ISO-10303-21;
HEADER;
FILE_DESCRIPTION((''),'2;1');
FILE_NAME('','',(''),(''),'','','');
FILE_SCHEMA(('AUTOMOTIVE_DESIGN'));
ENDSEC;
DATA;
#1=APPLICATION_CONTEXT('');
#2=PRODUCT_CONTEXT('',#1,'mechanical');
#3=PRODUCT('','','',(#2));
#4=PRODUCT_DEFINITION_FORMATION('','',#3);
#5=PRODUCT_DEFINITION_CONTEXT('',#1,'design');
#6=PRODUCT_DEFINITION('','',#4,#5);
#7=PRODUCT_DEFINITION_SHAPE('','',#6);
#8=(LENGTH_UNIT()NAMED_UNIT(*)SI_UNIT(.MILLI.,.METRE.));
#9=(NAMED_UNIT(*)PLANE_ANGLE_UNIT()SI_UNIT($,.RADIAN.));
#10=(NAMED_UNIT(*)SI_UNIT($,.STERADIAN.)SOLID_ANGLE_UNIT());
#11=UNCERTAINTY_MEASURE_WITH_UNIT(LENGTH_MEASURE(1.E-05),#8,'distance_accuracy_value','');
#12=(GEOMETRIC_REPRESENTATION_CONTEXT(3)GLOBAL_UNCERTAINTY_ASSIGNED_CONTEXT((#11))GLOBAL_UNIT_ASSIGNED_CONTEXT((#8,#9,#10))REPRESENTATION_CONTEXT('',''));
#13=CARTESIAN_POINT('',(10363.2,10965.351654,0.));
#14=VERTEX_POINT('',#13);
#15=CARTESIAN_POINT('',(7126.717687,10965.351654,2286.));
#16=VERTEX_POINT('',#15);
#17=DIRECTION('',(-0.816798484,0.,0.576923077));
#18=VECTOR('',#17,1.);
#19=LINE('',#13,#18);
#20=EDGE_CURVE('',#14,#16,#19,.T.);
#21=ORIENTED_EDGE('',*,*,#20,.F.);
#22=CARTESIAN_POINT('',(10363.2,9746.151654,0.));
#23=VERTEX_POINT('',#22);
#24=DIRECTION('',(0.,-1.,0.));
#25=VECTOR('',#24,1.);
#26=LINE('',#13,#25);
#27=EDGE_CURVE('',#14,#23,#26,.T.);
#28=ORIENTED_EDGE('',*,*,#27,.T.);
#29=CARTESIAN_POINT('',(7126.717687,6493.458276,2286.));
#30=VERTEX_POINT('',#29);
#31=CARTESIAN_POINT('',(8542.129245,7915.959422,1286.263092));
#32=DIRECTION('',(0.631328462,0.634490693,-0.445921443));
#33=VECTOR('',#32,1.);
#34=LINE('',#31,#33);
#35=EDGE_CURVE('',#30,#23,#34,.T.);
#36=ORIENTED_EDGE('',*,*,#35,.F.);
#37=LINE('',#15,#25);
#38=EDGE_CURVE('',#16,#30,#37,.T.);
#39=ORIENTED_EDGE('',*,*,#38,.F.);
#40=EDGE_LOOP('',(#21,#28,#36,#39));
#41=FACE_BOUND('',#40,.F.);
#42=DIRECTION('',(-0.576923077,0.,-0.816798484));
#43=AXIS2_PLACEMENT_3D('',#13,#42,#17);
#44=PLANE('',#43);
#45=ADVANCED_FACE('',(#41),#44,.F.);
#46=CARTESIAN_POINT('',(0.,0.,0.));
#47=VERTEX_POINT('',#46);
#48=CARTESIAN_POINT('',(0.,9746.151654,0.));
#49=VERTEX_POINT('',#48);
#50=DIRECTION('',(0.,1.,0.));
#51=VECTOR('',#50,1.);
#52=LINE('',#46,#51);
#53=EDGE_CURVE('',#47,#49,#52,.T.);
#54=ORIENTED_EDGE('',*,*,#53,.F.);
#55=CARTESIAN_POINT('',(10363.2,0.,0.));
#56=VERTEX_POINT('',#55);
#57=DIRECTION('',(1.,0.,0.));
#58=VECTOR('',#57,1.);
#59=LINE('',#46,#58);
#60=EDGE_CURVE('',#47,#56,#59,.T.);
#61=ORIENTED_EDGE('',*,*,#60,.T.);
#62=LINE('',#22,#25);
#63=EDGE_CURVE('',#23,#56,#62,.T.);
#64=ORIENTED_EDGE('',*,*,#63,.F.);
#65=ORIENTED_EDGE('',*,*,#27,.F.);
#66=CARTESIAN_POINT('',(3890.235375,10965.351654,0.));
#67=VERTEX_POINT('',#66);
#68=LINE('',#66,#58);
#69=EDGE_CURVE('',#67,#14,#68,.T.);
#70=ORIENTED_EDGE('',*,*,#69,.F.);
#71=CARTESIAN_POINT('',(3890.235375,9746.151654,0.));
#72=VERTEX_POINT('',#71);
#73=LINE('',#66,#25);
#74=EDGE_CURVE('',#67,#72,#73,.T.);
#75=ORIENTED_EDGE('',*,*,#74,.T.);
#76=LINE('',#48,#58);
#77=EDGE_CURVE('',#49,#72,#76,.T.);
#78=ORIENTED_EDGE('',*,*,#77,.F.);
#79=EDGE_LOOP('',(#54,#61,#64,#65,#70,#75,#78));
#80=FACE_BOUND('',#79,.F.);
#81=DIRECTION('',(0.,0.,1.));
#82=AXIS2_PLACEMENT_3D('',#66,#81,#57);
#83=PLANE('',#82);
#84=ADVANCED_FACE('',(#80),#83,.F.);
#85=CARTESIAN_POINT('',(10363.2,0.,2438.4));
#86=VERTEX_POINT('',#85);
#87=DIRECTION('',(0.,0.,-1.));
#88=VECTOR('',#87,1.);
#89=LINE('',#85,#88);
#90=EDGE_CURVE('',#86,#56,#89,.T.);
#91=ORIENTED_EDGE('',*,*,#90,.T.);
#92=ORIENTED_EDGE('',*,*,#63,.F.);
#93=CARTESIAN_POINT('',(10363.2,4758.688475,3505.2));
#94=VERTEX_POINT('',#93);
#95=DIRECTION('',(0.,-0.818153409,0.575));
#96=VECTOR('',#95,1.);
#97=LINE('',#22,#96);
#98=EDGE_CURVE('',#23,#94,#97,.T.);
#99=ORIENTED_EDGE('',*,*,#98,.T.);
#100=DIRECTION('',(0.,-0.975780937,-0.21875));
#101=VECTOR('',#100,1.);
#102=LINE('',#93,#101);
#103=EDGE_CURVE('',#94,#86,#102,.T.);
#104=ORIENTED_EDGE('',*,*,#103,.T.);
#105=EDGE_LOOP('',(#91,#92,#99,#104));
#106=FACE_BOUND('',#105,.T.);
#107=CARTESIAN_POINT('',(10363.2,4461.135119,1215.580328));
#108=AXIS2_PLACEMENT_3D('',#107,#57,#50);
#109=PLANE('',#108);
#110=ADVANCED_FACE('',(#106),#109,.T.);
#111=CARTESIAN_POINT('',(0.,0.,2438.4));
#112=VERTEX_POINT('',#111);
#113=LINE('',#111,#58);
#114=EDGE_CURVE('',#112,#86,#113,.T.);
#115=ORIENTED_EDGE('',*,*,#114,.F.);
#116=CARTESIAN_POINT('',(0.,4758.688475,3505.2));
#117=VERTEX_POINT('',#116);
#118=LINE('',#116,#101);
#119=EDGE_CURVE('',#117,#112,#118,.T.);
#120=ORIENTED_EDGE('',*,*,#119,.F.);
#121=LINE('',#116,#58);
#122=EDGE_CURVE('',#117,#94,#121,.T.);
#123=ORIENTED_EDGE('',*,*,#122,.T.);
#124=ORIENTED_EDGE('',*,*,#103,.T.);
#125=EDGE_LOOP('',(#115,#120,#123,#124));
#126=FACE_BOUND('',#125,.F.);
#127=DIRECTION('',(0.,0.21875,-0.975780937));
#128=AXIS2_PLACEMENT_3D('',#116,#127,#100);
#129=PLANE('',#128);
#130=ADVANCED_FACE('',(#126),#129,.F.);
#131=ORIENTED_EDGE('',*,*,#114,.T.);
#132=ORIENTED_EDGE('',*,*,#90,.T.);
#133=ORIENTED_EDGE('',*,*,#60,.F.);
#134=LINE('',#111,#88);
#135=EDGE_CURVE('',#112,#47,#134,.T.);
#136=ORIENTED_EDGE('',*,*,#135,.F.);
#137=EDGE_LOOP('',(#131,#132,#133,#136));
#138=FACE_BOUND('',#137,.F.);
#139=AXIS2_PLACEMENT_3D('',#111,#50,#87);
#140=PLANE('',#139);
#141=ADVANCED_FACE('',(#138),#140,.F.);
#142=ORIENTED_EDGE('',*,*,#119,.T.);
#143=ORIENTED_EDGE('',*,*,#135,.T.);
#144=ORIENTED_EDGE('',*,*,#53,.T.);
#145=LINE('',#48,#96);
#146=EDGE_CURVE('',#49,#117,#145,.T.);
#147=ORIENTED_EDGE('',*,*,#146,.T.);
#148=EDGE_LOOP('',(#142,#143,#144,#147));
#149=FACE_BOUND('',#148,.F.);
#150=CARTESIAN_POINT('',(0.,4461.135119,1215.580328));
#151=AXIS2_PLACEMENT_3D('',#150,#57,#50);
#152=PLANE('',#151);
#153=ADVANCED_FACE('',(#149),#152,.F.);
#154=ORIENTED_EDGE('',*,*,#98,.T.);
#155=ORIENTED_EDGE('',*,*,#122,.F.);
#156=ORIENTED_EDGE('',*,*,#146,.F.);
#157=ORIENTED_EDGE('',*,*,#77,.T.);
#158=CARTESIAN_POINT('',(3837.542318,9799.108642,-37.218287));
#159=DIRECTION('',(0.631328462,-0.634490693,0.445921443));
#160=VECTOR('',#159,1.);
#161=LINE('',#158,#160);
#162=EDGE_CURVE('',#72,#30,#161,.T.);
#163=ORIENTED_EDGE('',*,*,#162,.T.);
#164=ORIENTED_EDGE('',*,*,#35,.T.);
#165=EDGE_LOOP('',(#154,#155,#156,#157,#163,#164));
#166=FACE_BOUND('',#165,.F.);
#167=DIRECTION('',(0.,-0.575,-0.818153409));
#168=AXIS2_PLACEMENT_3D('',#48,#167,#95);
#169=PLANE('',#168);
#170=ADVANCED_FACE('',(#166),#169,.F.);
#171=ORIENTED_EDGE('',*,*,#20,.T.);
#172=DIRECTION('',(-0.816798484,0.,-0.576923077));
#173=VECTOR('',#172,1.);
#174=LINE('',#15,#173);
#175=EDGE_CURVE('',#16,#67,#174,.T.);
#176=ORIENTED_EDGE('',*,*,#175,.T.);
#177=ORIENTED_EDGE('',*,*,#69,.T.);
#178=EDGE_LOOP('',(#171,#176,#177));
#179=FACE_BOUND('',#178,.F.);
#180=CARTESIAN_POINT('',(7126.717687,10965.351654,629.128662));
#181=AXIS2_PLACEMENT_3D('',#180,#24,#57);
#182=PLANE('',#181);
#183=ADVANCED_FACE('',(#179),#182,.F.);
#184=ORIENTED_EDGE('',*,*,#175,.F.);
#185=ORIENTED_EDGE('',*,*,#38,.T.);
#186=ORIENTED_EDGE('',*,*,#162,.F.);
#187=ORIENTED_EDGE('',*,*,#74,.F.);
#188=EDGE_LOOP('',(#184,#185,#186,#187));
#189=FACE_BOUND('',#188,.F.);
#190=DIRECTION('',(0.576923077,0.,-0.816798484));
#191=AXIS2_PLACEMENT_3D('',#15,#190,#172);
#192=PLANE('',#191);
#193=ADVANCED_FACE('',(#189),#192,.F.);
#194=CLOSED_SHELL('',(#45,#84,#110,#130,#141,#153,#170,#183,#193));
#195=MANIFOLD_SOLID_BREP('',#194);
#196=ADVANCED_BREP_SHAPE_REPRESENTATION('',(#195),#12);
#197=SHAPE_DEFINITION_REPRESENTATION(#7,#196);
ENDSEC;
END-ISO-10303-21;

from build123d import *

# Parameters (mm, degrees)
F1_DEPTH = 10363.2
F5_DEPTH = 4572


with BuildPart() as f1:
    # F0 (on Right) → F1 (new body)
    with BuildSketch(Plane.YZ):
        Polygon((0, 2438.4), (0, 0), (9746.151653591, 0), (4758.6884747796, 3505.2), align=None)
    extrude(amount=F1_DEPTH)

    # F4 (on face) → F5 (join)
    with BuildSketch(Plane.XZ.offset(-10965.351653591)):
        Polygon((3890.2353747298, 0), (10363.2, 0), (7126.7176873649, 2286), align=None)
    extrude(amount=F5_DEPTH)


solid = f1.part
